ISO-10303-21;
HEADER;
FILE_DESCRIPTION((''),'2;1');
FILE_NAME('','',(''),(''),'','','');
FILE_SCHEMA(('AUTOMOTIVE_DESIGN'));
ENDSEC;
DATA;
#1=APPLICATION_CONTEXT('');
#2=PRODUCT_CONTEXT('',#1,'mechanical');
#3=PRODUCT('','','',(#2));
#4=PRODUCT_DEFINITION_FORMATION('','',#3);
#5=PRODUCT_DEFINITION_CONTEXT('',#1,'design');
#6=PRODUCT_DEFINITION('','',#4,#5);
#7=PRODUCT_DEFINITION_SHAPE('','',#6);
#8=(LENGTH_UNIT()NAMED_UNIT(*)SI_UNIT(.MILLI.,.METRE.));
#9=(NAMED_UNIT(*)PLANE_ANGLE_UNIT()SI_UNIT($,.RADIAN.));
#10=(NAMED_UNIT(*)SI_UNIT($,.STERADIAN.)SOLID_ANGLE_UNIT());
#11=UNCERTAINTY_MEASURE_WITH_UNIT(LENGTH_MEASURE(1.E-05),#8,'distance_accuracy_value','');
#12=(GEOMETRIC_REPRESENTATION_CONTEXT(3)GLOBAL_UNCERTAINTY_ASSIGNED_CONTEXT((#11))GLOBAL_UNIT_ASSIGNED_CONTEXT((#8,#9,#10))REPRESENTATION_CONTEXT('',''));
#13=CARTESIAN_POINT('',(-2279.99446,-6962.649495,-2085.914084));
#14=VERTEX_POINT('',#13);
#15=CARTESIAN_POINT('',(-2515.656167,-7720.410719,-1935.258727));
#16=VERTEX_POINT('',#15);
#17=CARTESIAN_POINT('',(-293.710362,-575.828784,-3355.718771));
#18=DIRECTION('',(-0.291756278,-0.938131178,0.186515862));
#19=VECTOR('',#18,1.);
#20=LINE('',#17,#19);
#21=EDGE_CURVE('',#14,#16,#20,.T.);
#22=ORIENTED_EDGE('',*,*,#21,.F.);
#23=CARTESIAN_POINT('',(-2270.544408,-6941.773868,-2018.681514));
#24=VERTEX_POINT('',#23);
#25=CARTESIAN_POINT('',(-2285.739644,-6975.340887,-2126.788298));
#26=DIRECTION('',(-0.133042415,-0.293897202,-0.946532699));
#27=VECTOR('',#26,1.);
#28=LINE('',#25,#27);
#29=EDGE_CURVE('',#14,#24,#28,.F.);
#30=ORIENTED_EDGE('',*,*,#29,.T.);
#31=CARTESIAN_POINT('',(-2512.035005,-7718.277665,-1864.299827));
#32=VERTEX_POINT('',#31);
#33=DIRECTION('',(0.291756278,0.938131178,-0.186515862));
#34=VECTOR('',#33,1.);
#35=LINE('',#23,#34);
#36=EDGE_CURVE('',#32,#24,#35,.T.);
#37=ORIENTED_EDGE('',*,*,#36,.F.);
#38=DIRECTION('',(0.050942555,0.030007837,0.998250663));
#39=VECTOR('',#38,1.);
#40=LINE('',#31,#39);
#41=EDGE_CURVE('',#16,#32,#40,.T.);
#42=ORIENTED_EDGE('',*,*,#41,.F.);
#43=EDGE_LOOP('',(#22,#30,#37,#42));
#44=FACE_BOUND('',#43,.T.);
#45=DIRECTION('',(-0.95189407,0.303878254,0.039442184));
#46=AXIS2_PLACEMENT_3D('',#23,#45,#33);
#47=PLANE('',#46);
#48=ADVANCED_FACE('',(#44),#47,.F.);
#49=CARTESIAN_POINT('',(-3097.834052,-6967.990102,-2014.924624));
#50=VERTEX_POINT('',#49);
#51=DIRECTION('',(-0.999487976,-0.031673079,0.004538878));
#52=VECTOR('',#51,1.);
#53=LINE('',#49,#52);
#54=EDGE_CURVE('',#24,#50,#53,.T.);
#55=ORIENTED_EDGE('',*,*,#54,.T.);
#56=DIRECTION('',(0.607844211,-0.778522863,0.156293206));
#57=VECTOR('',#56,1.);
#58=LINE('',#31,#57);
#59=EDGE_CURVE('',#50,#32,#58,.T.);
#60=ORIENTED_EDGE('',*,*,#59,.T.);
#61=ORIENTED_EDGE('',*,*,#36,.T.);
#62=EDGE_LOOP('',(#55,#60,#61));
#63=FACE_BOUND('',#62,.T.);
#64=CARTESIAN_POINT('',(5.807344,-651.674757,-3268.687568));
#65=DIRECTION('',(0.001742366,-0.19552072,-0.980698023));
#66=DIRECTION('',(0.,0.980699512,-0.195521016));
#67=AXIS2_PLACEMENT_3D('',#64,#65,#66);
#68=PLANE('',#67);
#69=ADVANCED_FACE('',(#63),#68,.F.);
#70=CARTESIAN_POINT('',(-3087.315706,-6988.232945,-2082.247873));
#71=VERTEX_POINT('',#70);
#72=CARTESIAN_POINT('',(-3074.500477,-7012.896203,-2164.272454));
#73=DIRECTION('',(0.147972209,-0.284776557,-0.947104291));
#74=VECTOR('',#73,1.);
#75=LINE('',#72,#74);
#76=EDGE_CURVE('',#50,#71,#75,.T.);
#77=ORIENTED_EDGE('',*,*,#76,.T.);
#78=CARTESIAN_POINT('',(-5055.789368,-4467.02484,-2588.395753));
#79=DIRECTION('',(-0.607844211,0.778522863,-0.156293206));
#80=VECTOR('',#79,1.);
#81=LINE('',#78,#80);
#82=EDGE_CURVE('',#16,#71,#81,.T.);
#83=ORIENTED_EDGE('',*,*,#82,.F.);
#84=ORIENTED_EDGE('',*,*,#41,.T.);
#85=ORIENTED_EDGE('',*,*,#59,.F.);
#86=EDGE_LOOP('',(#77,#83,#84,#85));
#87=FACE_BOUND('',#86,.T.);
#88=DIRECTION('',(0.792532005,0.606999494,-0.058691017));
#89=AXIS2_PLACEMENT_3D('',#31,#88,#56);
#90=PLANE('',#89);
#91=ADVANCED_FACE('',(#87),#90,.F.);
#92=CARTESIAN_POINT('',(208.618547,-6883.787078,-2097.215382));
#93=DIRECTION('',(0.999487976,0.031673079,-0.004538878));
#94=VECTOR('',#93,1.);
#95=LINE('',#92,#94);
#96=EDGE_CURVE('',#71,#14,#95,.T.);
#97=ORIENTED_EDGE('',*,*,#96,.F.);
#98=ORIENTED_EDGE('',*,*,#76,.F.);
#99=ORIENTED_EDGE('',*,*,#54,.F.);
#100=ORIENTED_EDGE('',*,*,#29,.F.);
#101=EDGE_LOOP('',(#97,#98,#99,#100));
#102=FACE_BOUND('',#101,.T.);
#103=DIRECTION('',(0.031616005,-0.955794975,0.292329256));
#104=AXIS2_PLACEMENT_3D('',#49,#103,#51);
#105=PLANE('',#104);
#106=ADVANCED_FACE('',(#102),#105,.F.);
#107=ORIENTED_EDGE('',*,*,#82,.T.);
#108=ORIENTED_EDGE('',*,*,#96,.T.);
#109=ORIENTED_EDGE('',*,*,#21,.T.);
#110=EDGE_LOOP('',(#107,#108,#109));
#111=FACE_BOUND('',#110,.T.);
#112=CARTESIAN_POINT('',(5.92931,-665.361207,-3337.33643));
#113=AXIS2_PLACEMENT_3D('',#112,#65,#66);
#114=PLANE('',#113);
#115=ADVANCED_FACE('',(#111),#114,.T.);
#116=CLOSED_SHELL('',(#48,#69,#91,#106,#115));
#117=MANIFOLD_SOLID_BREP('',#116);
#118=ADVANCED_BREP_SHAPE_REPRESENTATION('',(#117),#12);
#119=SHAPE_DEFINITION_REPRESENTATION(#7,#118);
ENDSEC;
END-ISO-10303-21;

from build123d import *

# Parameters (mm, degrees)
BOSS_EXTRUDE1_DEPTH = 70
CHAMFER1_SIZE2      = 4.18941816
CHAMFER1_SIZE       = 70
CHAMFER2_SIZE       = 7.017777763
CHAMFER2_SIZE_2     = 70


# Some blends are built 0.0001 mm under size
with BuildPart() as part:
    # Sketch1 → Boss-Extrude1 (new body)
    with BuildSketch(Plane(origin=(5.473822054, -457.937984789, -3307.31325441), x_dir=(-0.9856470342360776, 0.16521656475401902, -0.03469020946183102), z_dir=(-0.0017423663357502073, 0.19552071957465159, 0.980698023030822))):
        Polygon((1127.410622311, 6899.993028511), (1231.788289667, 7721.098906243), (1938.364522736, 7065.713670786), align=None)
    extrude(amount=-BOSS_EXTRUDE1_DEPTH)

    # Chamfer1
    chamfer1_edges = [part.edges().sort_by_distance(p)[0] for p in [
        (-2804.812562525, -7356.820333598, -2008.261086677),
    ]]
    chamfer1_side = [part.faces().sort_by_distance(p)[0] for p in [
        (-2804.812708515, -7356.803951237, -2008.178915595),
    ]]
    chamfer(chamfer1_edges, length=CHAMFER1_SIZE - 0.0001, length2=CHAMFER1_SIZE2 - 0.0001, reference=chamfer1_side[0])  # a hair under: the kernel refuses the full size

    # Chamfer2
    # the kernel refuses this chamfer: 70, 7.017777763 mm, written as the material it takes off along each edge
    with BuildSketch(Plane(origin=(-3274.435511319, -6987.276794808, -2082.770948142), x_dir=(0.030469156507814454, -0.9854547133895118, -0.1671844441331112), z_dir=(0.999487976226041, 0.031673079457915976, -0.004538878410539619))) as chamfer2_piece_1:
        Polygon((CHAMFER2_SIZE * 0.934223811245, -CHAMFER2_SIZE * 0.356687356966), (-CHAMFER2_SIZE_2 * 0.356687356946, -CHAMFER2_SIZE_2 * 0.93422381119), (0, 0), align=None)
    extrude(amount=1186.493835622, mode=Mode.SUBTRACT)
    with BuildSketch(Plane(origin=(-2217.332595505, -6784.751941859, -2121.270000408), x_dir=(0.0019280825655142314, 0.19442255260126845, 0.9809159767980269), z_dir=(-0.2917562783292002, -0.9381311781639606, 0.1865158615565802))) as chamfer2_piece_2:
        Polygon((CHAMFER2_SIZE_2 * 0.999992637165, CHAMFER2_SIZE_2 * 0.00383739696559), (-CHAMFER2_SIZE * 0.00383739696579, CHAMFER2_SIZE * 0.999992637223), (0, 0), align=None)
    extrude(amount=1186.493835622, mode=Mode.SUBTRACT)


solid = part.part
